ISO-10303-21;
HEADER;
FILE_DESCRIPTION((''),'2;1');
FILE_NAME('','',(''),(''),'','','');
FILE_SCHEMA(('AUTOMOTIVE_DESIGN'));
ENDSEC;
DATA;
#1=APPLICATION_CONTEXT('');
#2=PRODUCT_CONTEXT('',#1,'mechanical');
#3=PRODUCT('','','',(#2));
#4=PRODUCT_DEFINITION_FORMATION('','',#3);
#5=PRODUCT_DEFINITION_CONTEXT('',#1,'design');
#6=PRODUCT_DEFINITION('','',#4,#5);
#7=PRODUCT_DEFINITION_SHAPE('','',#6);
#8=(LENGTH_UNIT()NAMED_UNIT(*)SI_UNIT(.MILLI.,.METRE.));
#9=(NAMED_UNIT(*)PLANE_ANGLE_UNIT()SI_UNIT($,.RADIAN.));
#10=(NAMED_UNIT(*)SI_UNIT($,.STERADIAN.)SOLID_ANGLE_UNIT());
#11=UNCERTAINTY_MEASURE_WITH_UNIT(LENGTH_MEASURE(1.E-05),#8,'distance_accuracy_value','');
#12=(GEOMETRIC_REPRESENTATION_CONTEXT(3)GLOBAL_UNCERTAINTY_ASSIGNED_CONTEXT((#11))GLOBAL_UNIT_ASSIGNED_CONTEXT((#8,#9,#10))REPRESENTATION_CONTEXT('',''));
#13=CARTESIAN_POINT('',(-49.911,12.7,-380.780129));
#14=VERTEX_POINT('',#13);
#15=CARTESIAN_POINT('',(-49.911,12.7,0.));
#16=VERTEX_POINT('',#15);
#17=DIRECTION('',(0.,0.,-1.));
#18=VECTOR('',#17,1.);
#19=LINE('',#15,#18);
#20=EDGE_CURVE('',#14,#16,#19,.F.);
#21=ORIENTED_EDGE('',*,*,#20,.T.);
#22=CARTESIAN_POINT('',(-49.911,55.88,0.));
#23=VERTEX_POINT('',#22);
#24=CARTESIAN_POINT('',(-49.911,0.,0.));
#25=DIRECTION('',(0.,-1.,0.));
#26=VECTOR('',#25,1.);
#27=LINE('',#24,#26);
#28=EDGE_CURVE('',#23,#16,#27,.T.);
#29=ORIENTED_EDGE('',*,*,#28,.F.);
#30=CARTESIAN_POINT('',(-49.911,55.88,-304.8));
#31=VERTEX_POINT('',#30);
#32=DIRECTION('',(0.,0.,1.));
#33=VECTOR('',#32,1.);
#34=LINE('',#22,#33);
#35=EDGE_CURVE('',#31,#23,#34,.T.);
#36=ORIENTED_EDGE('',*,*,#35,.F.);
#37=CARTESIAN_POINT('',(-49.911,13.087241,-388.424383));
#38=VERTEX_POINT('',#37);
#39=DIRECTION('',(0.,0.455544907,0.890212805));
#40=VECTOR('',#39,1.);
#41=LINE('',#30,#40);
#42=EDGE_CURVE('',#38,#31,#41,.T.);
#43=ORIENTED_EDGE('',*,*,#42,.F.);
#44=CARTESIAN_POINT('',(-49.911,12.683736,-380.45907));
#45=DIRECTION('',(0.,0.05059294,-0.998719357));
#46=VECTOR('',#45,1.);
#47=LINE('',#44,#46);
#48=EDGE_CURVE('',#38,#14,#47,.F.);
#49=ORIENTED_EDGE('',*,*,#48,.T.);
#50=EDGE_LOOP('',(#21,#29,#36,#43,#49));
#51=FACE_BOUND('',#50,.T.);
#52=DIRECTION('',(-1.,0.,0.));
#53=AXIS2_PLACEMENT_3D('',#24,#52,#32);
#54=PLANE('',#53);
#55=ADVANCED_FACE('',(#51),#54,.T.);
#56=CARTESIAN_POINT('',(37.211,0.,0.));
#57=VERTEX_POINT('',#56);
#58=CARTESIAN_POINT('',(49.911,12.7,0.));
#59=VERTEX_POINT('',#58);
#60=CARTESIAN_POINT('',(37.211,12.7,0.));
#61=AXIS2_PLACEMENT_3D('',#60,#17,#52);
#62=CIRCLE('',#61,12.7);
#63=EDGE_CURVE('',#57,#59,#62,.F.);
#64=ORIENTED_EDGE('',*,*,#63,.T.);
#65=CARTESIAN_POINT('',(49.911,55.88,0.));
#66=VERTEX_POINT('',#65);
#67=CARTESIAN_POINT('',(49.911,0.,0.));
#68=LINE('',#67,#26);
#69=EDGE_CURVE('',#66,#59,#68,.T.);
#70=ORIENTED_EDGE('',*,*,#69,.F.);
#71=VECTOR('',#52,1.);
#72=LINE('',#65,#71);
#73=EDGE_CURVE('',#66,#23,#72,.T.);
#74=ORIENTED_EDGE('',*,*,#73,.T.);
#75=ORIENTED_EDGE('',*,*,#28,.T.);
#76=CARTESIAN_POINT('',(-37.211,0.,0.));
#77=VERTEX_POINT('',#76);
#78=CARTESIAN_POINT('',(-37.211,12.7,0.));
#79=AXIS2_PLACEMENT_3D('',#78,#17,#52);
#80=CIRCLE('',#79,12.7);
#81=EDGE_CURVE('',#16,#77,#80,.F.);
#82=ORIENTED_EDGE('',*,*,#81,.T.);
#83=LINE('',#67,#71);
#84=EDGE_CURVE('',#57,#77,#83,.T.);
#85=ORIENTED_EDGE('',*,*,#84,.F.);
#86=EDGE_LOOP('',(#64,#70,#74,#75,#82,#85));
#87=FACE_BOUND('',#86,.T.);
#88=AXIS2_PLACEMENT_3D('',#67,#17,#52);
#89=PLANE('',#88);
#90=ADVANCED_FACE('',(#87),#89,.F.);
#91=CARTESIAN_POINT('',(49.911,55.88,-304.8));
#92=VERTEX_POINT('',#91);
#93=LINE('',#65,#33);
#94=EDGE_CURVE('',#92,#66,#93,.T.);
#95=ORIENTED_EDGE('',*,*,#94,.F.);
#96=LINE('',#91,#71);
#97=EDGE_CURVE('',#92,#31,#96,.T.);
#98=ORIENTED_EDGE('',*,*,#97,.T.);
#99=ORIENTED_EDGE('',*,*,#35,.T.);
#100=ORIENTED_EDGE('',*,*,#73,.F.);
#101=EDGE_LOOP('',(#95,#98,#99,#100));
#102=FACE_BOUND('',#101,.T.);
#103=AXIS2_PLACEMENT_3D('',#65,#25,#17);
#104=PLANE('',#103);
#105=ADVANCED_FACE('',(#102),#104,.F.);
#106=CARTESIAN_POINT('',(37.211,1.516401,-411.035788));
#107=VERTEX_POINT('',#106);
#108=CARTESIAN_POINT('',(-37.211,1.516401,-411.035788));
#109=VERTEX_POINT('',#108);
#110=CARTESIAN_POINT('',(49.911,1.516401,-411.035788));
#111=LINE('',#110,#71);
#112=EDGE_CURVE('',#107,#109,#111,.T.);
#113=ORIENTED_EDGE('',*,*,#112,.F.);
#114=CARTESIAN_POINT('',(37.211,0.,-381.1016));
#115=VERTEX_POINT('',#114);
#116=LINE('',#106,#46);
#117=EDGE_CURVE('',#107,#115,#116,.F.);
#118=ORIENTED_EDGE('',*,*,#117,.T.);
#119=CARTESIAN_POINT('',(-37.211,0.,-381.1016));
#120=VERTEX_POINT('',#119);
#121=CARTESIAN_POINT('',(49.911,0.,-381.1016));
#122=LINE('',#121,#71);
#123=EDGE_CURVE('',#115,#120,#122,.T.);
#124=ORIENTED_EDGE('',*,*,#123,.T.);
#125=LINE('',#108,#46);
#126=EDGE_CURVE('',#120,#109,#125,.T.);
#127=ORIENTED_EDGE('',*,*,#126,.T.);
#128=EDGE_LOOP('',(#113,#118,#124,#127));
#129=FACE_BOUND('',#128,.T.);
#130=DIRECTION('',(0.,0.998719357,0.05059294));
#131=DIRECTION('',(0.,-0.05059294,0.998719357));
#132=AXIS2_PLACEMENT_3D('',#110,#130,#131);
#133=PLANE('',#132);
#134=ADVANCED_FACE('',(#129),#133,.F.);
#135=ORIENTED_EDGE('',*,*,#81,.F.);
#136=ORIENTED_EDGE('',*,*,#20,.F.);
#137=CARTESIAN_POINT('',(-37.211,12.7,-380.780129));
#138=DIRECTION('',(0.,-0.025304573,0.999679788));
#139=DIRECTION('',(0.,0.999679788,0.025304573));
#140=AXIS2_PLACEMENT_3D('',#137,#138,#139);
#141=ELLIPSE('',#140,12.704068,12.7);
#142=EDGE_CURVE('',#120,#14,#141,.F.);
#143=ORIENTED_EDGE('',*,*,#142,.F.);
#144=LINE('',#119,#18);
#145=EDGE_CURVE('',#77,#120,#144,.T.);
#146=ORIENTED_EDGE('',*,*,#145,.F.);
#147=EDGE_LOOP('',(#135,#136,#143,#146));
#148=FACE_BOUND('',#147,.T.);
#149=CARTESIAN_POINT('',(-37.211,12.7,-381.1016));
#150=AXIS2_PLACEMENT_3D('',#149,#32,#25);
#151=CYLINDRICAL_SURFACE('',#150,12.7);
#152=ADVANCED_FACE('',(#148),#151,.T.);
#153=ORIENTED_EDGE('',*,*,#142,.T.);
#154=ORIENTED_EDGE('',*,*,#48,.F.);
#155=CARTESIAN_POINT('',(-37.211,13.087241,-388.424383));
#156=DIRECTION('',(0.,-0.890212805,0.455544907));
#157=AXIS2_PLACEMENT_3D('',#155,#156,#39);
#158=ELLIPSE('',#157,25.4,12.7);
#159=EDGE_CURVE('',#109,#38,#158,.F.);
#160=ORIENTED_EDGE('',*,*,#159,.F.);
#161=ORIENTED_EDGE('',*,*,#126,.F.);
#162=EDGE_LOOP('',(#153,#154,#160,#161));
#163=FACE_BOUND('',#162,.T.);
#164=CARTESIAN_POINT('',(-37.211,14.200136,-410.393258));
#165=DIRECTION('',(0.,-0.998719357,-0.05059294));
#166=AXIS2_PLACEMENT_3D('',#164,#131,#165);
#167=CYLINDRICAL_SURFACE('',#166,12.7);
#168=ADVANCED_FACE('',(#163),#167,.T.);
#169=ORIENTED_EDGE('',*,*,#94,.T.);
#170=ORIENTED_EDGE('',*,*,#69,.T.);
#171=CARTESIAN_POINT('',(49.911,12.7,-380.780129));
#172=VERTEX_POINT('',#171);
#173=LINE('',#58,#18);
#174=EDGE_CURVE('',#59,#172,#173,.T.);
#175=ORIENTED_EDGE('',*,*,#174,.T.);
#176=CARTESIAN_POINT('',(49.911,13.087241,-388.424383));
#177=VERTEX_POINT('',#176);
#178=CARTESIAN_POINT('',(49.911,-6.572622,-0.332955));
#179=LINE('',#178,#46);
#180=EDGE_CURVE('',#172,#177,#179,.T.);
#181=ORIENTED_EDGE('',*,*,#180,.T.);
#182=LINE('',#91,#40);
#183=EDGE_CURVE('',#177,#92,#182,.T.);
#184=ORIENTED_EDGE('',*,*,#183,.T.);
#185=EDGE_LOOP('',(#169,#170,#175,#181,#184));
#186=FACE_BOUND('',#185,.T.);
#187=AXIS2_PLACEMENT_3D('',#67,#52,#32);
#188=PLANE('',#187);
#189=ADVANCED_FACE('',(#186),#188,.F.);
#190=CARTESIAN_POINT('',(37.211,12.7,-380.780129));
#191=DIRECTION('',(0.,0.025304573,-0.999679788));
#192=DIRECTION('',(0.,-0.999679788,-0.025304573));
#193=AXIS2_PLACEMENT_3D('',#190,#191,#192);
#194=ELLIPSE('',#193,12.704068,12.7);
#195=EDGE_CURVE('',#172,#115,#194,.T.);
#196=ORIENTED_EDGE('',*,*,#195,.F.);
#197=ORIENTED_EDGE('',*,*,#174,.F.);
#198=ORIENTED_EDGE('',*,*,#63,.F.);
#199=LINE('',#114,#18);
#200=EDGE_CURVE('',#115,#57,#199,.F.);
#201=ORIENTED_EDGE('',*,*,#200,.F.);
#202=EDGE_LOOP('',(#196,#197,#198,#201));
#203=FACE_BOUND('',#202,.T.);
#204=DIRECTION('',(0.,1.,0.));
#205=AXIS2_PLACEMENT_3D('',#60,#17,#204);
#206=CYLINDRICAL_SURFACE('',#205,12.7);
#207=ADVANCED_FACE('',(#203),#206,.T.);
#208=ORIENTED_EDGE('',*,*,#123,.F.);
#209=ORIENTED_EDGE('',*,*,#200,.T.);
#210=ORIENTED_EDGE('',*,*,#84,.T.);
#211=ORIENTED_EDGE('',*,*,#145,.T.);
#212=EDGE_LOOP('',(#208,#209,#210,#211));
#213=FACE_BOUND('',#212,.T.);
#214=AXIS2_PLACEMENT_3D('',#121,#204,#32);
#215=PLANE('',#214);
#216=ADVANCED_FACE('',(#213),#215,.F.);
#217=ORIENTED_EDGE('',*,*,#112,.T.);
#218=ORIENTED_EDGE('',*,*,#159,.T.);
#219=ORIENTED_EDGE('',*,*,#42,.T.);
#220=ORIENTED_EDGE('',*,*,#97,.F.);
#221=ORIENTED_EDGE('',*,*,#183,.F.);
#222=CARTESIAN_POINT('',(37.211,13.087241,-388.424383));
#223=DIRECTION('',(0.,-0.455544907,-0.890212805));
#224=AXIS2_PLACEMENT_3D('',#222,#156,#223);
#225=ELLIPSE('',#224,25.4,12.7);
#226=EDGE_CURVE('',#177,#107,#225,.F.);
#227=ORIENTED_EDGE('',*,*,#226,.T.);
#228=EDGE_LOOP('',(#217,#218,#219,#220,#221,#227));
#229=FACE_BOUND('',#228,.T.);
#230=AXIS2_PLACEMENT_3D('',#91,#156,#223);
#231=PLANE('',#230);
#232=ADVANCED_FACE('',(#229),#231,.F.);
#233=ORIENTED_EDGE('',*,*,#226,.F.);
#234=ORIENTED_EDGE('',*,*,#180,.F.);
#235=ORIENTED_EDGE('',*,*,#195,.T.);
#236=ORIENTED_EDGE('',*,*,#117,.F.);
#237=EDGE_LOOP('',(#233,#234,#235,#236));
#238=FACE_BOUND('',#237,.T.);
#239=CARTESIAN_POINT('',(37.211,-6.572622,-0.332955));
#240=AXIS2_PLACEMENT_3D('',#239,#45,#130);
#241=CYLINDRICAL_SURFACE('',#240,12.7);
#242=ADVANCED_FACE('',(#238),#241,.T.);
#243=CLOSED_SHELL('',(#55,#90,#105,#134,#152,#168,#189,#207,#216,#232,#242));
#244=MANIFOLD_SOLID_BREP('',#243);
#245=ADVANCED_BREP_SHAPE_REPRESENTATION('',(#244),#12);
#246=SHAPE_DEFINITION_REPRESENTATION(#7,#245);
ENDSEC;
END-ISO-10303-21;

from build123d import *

# Parameters (mm, degrees)
BOSS_EXTRUDE1_DEPTH = 49.911
FILLET1_R           = 12.7


with BuildPart() as part:
    # Sketch1 → Boss-Extrude1 (new, symmetric)
    with BuildSketch(Plane(origin=(0, 0, 0), x_dir=(0, 0, -1), z_dir=(1, 0, 0))):
        Polygon((0, 0), (0, 55.88), (304.8, 55.88), (411.035788296, 1.516400562), (381.1016, 0), align=None)
    extrude(amount=BOSS_EXTRUDE1_DEPTH, both=True)

    # Fillet1
    # the kernel refuses this fillet: 12.7 mm, written as the material it takes off along each edge
    with BuildSketch(Plane(origin=(49.911, 0, -412.8516), x_dir=(0, 1, 0), z_dir=(0, 0, 1))) as fillet1_piece_1:
        with BuildLine():
            CenterArc((FILLET1_R, FILLET1_R), FILLET1_R, 180, 90)
            Line((0, FILLET1_R), (0, 0))
            Line((0, 0), (FILLET1_R, 0))
        make_face()
    extrude(amount=444.6016, mode=Mode.SUBTRACT)
    with BuildSketch(Plane(origin=(-49.911, 3.12272641, -442.745127887), x_dir=(1, 0, 0), z_dir=(0, -0.0505929400767125, 0.9987193571841863)), Plane(origin=(49.911, 3.12272641, -442.745127887), x_dir=(0, 0.9987193571841864, 0.0505929400767125), z_dir=(0, -0.0505929400767125, 0.9987193571841863))) as fillet1_piece_2:
        with BuildLine():
            CenterArc((FILLET1_R, FILLET1_R), FILLET1_R, 180, 90)
            Line((0, FILLET1_R), (0, 0))
            Line((0, 0), (FILLET1_R, 0))
        make_face()
    extrude(amount=93.472572456, mode=Mode.SUBTRACT)
    with BuildSketch(Plane(origin=(-49.911, 0, -412.8516), x_dir=(0, 1, 0), z_dir=(0, 0, 1))) as fillet1_piece_3:
        with BuildLine():
            CenterArc((FILLET1_R, -FILLET1_R), FILLET1_R, 90, 90)
            Line((0, -FILLET1_R), (0, 0))
            Line((0, 0), (FILLET1_R, 0))
        make_face()
    extrude(amount=444.6016, mode=Mode.SUBTRACT)


solid = part.part
